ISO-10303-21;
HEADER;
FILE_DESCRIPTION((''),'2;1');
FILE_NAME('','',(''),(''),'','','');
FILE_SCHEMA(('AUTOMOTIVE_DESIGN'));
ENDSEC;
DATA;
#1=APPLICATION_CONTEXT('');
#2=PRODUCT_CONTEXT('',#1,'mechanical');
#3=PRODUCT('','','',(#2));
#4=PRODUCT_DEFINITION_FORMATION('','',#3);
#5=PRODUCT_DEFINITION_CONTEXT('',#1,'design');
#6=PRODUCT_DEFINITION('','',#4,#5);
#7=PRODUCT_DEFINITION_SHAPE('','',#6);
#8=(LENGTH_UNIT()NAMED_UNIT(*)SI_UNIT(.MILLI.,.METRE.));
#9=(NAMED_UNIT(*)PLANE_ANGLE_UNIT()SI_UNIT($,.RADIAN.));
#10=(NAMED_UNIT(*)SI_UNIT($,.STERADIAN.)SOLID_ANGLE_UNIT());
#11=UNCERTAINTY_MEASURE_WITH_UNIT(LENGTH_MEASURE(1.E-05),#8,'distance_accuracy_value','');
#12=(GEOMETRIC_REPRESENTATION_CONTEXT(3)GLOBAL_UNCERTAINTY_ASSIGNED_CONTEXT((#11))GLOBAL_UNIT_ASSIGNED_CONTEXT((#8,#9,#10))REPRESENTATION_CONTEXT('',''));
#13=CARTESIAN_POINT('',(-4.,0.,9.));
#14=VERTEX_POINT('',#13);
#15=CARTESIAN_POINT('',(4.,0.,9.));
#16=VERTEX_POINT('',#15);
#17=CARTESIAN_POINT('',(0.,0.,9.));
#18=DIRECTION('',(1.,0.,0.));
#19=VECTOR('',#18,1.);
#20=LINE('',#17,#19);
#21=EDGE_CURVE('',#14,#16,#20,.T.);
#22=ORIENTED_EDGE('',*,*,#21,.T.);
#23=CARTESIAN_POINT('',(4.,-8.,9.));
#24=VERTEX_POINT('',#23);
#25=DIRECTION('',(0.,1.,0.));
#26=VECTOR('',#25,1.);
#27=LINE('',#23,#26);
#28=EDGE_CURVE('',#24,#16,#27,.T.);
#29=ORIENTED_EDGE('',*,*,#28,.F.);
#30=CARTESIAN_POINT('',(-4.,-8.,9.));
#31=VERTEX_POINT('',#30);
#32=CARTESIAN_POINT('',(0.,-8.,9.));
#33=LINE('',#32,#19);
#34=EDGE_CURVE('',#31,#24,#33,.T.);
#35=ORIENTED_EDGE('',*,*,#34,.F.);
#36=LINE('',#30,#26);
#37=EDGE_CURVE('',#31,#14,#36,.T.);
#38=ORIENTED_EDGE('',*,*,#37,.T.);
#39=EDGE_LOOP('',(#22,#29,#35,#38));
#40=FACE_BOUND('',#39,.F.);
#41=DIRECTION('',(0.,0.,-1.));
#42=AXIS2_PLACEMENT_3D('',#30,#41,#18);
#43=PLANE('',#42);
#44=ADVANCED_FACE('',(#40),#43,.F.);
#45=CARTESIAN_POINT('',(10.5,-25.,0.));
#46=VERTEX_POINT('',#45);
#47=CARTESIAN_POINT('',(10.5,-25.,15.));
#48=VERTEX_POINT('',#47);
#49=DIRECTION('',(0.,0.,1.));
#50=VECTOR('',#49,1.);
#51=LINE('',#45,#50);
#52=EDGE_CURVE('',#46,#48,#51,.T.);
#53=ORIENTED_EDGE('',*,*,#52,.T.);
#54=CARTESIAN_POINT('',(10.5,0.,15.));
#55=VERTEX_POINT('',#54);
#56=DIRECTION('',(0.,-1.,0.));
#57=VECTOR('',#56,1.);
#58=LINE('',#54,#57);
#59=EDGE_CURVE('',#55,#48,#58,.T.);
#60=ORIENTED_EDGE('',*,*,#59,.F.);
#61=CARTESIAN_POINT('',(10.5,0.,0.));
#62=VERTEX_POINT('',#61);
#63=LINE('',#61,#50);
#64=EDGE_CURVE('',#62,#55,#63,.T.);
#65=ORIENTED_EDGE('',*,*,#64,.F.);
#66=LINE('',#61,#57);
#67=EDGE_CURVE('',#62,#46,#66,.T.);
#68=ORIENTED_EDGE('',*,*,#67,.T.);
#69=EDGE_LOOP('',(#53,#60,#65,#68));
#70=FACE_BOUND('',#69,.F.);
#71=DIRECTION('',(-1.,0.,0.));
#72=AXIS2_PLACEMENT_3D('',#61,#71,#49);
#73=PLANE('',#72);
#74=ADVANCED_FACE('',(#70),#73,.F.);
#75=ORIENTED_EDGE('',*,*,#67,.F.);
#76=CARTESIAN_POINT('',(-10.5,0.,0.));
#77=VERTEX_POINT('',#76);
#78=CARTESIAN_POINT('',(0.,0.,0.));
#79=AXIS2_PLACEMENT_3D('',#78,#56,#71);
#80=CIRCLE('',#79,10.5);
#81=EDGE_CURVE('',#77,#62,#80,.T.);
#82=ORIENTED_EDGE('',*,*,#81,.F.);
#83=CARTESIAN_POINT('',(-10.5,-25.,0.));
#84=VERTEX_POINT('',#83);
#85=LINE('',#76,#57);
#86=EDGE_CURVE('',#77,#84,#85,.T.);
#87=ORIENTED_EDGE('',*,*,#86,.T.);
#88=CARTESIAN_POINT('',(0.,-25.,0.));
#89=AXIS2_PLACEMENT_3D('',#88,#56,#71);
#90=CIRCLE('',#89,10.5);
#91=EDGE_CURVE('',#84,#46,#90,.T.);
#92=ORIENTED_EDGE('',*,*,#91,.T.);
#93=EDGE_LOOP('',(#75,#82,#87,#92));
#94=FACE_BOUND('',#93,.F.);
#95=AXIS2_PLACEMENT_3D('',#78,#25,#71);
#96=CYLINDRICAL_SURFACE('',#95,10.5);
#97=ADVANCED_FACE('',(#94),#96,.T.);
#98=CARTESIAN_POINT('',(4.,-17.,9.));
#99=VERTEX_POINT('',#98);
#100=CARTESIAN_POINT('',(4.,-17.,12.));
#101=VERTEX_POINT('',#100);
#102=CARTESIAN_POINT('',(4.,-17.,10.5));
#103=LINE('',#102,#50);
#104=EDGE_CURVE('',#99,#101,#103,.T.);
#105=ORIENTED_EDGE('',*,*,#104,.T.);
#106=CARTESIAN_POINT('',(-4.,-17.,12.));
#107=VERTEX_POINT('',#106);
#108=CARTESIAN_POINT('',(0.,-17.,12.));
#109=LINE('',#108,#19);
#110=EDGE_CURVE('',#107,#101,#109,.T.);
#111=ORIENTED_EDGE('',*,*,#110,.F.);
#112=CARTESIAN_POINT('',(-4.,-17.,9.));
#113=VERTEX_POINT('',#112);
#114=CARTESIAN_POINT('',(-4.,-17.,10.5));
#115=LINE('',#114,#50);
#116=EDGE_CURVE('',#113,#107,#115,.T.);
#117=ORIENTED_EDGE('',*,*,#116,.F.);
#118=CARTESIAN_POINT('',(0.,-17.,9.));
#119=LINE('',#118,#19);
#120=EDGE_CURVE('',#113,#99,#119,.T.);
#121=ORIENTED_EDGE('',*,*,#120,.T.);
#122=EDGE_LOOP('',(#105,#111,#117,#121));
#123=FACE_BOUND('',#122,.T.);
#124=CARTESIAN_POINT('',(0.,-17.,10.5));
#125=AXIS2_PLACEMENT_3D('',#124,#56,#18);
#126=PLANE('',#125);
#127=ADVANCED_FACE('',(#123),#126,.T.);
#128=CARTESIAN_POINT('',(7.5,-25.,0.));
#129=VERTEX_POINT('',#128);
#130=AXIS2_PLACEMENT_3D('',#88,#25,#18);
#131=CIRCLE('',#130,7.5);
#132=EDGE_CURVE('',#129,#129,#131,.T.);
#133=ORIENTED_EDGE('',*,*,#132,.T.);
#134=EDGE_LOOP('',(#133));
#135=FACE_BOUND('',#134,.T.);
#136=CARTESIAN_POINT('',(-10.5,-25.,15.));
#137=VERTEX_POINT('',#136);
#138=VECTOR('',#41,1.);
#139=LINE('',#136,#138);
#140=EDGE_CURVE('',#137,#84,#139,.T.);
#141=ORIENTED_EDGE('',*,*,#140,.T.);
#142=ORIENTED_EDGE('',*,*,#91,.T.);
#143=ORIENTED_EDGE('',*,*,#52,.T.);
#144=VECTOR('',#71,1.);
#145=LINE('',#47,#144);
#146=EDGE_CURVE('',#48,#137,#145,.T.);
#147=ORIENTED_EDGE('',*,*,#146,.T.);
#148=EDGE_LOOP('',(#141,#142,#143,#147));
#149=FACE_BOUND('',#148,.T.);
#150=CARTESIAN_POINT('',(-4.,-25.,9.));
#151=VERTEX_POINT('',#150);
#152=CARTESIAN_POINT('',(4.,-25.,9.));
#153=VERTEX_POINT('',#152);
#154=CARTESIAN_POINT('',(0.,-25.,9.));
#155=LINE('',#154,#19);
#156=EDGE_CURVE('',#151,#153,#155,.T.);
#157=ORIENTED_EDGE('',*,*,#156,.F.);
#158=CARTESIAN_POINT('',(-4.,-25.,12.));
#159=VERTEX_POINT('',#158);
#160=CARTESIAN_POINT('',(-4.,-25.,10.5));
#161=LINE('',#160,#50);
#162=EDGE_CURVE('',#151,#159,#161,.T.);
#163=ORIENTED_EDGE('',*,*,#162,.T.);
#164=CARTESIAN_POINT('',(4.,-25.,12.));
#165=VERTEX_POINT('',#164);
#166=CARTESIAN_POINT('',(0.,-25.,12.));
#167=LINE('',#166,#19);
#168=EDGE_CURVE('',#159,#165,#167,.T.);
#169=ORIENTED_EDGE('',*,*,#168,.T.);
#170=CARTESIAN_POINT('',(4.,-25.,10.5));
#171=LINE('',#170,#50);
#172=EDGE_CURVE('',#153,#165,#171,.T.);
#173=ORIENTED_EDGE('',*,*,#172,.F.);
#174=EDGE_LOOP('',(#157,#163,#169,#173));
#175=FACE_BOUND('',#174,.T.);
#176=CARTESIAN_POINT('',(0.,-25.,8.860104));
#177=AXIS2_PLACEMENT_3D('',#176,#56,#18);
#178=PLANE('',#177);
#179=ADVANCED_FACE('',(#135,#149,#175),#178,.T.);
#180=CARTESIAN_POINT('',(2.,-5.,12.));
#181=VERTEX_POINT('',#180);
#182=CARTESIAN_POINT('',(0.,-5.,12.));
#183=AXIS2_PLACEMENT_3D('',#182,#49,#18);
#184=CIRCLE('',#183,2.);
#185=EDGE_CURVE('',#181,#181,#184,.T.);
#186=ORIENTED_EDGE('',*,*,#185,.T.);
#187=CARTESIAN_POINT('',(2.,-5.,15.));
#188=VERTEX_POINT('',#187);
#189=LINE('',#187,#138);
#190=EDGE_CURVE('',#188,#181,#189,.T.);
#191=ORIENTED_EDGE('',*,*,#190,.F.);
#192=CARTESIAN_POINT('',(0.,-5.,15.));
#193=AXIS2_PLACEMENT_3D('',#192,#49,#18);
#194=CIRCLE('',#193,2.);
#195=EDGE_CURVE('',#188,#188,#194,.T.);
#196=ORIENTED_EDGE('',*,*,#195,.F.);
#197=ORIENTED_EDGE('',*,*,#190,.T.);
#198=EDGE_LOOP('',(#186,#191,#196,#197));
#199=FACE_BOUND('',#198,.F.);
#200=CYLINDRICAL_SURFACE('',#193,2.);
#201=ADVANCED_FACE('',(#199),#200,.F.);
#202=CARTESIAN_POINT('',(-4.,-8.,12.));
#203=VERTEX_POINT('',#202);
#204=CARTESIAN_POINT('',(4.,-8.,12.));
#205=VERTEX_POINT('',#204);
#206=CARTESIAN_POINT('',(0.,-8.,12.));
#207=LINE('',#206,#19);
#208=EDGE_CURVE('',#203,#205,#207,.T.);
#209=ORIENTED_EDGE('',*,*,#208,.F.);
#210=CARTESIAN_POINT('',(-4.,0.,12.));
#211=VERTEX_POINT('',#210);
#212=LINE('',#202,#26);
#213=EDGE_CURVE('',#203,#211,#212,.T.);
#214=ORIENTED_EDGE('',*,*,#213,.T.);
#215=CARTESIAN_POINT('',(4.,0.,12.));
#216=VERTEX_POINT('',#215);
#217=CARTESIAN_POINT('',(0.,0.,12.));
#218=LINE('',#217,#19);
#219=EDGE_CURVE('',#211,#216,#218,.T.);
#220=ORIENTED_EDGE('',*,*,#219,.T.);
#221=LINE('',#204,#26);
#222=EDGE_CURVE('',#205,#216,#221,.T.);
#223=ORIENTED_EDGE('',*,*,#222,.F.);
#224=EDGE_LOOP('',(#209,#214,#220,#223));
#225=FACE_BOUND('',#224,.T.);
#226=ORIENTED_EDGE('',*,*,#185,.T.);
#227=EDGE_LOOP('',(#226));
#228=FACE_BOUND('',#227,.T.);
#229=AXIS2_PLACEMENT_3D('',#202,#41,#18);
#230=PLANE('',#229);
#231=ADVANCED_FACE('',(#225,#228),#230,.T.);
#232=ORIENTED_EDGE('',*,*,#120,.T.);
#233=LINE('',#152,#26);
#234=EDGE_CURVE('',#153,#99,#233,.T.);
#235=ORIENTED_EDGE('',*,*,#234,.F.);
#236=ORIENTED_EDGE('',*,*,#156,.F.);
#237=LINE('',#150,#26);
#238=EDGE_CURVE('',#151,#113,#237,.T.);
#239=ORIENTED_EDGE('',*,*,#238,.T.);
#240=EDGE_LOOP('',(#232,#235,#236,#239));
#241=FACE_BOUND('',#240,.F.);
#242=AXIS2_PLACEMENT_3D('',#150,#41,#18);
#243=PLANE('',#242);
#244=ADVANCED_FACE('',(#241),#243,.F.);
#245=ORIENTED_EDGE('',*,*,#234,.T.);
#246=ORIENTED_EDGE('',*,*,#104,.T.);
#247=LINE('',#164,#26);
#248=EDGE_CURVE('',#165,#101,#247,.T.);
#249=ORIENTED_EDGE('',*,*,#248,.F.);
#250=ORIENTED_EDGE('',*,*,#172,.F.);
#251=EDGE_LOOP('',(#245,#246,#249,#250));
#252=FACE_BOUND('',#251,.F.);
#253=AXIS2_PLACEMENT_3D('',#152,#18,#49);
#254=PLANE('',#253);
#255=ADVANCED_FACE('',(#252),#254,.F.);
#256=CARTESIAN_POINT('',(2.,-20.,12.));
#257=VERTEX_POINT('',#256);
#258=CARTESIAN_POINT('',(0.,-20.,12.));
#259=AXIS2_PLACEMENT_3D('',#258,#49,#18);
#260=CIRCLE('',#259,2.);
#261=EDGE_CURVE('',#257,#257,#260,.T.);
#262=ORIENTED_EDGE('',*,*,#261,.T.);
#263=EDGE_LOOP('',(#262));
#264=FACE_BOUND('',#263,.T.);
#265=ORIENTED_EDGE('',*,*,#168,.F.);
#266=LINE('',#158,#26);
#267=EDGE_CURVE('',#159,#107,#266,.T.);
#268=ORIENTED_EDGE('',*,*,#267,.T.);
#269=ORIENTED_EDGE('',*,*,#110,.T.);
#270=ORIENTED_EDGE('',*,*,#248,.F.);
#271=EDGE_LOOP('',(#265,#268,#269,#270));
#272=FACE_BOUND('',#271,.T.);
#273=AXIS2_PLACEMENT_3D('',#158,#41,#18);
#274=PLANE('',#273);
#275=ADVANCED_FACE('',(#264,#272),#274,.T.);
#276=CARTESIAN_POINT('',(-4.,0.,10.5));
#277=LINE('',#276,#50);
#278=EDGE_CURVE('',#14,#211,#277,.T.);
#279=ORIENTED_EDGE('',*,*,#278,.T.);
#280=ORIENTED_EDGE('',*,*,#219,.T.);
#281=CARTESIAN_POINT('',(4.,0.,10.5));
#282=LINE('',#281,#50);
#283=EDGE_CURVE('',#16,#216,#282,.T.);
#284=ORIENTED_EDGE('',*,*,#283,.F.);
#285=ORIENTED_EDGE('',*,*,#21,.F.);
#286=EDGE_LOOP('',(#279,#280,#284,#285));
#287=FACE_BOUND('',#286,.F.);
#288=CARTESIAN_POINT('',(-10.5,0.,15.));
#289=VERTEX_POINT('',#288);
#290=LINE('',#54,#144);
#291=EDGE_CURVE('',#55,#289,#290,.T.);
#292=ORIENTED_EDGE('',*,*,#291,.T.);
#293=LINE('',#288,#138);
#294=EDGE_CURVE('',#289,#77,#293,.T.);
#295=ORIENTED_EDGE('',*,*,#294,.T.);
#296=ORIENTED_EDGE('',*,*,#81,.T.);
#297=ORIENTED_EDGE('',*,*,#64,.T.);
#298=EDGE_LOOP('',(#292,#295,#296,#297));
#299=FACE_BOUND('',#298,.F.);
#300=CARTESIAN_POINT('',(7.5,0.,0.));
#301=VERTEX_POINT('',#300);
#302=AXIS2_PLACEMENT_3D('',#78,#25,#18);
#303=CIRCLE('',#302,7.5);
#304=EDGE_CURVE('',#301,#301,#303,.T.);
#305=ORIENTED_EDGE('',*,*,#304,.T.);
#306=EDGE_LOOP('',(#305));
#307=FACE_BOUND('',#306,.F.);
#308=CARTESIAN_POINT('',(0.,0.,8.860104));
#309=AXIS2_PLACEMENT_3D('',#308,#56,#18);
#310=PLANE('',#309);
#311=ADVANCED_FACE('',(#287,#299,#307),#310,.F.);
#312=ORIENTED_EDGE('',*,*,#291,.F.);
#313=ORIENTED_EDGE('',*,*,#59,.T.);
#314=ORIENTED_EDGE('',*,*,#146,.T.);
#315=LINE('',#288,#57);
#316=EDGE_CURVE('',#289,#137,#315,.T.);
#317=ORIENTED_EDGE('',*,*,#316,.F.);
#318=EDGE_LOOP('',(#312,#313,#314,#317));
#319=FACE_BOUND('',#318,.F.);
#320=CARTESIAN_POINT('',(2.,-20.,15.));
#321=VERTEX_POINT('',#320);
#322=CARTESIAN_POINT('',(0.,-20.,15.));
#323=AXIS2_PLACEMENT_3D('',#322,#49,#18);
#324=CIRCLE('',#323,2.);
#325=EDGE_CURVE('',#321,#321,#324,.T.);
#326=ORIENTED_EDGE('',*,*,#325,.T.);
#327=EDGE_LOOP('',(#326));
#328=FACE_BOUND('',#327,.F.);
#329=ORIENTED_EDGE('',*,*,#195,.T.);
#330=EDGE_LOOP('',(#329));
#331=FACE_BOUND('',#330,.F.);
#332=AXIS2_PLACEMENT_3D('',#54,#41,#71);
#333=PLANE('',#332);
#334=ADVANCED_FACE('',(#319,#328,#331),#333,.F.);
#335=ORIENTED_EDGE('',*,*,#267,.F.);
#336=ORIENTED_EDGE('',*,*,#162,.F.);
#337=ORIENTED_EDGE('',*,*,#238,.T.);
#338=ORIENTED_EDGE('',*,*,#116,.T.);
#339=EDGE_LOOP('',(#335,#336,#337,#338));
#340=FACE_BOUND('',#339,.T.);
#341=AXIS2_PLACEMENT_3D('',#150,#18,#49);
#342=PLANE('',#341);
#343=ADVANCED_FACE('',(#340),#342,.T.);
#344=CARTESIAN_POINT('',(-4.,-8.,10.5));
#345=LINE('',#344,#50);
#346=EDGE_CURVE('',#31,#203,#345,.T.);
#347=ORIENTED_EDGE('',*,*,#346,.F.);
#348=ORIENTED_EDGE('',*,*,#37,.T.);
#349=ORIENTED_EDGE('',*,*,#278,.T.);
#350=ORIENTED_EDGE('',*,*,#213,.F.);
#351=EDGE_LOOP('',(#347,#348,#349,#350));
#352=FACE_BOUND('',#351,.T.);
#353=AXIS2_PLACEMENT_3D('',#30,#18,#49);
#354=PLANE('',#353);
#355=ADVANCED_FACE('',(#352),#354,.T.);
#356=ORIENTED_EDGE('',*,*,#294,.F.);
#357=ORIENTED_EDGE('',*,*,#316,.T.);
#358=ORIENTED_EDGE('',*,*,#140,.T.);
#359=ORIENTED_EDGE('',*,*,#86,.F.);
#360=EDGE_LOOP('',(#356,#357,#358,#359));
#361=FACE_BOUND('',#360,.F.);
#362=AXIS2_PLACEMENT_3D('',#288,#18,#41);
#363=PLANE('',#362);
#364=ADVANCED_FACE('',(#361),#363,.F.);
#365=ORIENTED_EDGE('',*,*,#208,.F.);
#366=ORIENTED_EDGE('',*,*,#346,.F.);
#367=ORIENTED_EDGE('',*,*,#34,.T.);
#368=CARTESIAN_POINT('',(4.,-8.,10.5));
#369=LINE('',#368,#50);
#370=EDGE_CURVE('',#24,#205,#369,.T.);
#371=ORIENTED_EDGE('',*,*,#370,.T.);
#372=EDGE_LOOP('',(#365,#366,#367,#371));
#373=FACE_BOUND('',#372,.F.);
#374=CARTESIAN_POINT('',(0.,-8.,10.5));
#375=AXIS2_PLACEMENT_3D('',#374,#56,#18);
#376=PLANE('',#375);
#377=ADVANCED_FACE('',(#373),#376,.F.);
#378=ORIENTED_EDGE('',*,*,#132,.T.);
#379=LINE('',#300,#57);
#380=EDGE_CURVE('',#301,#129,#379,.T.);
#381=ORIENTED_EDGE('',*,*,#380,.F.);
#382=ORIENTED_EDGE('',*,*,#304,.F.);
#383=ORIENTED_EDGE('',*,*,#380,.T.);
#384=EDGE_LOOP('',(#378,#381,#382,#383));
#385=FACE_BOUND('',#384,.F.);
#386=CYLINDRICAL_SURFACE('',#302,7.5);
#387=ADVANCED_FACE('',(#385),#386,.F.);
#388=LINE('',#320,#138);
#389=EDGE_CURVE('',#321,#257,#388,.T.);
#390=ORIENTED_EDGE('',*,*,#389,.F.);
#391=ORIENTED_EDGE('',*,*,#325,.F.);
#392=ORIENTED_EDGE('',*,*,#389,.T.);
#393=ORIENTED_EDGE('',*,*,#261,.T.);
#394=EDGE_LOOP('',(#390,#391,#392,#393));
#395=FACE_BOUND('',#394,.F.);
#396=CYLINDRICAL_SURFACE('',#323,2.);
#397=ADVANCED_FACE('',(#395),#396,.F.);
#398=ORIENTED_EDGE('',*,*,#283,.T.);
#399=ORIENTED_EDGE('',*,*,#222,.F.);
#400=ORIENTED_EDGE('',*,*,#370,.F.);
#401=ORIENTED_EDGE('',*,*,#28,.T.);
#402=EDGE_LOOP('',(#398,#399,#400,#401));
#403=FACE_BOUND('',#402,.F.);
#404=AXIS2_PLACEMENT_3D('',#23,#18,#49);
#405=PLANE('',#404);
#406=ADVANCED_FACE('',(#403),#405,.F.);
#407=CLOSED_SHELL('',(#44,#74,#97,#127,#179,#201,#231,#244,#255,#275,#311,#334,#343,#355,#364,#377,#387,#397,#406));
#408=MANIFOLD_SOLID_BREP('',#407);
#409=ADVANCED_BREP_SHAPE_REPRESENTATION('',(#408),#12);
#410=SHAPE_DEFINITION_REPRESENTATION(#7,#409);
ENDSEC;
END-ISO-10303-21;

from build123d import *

# Parameters (mm, degrees)
F1_DEPTH        = 25
F2_R            = 2
F3_DEPTH        = 6
F4_W            = 8
F4_H            = 3
F5_DEPTH        = 8
F5_COPIES_COUNT = 2
F5_COPIES_PITCH = 17


# Not quite as in the source:
# - a pattern or mirror of a feature is missing from the dataset's text; its kind, count and spacing are read off the source's solid


with BuildPart() as f1:
    # F0 (on Front) → F1 (new body)
    with BuildSketch(Plane.XZ):
        with BuildLine():
            ThreePointArc((-10.5, 0), (0, 10.5), (10.5, 0))
            Line((10.5, 0), (10.5, 15))
            Line((10.5, 15), (-10.5, 15))
            Line((-10.5, 15), (-10.5, 0))
        make_face()
        with BuildLine():
            Line((10.5, 0), (7.5, 0))
            ThreePointArc((7.5, 0), (0, -7.5), (-7.5, 0))
            Line((-7.5, 0), (-10.5, 0))
            ThreePointArc((-10.5, 0), (0, -10.5), (10.5, 0))
        make_face()
        with BuildLine():
            ThreePointArc((-7.5, 0), (0, 7.5), (7.5, 0))
            Line((7.5, 0), (10.5, 0))
            ThreePointArc((10.5, 0), (0, 10.5), (-10.5, 0))
            Line((-10.5, 0), (-7.5, 0))
        make_face()
    extrude(amount=F1_DEPTH)

    # F2 (on face) → F3 (cut)
    with BuildSketch(Plane.XY.offset(15)):
        with Locations((0, -5)):
            Circle(F2_R)
        with Locations((0, -20)):
            Circle(F2_R)
    extrude(amount=-F3_DEPTH, mode=Mode.SUBTRACT)

    # F4 (on face) → F5 (cut)
    with BuildSketch(Plane.XZ.offset(25)):
        with Locations((0, 10.5)):
            Rectangle(F4_W, F4_H)
    f5 = extrude(amount=-F5_DEPTH, mode=Mode.SUBTRACT)

    # F5_copies: F5 ×2
    with Locations(*[(0, i * F5_COPIES_PITCH, 0) for i in range(1, F5_COPIES_COUNT)]):
        add(f5, mode=Mode.SUBTRACT)


solid = f1.part
